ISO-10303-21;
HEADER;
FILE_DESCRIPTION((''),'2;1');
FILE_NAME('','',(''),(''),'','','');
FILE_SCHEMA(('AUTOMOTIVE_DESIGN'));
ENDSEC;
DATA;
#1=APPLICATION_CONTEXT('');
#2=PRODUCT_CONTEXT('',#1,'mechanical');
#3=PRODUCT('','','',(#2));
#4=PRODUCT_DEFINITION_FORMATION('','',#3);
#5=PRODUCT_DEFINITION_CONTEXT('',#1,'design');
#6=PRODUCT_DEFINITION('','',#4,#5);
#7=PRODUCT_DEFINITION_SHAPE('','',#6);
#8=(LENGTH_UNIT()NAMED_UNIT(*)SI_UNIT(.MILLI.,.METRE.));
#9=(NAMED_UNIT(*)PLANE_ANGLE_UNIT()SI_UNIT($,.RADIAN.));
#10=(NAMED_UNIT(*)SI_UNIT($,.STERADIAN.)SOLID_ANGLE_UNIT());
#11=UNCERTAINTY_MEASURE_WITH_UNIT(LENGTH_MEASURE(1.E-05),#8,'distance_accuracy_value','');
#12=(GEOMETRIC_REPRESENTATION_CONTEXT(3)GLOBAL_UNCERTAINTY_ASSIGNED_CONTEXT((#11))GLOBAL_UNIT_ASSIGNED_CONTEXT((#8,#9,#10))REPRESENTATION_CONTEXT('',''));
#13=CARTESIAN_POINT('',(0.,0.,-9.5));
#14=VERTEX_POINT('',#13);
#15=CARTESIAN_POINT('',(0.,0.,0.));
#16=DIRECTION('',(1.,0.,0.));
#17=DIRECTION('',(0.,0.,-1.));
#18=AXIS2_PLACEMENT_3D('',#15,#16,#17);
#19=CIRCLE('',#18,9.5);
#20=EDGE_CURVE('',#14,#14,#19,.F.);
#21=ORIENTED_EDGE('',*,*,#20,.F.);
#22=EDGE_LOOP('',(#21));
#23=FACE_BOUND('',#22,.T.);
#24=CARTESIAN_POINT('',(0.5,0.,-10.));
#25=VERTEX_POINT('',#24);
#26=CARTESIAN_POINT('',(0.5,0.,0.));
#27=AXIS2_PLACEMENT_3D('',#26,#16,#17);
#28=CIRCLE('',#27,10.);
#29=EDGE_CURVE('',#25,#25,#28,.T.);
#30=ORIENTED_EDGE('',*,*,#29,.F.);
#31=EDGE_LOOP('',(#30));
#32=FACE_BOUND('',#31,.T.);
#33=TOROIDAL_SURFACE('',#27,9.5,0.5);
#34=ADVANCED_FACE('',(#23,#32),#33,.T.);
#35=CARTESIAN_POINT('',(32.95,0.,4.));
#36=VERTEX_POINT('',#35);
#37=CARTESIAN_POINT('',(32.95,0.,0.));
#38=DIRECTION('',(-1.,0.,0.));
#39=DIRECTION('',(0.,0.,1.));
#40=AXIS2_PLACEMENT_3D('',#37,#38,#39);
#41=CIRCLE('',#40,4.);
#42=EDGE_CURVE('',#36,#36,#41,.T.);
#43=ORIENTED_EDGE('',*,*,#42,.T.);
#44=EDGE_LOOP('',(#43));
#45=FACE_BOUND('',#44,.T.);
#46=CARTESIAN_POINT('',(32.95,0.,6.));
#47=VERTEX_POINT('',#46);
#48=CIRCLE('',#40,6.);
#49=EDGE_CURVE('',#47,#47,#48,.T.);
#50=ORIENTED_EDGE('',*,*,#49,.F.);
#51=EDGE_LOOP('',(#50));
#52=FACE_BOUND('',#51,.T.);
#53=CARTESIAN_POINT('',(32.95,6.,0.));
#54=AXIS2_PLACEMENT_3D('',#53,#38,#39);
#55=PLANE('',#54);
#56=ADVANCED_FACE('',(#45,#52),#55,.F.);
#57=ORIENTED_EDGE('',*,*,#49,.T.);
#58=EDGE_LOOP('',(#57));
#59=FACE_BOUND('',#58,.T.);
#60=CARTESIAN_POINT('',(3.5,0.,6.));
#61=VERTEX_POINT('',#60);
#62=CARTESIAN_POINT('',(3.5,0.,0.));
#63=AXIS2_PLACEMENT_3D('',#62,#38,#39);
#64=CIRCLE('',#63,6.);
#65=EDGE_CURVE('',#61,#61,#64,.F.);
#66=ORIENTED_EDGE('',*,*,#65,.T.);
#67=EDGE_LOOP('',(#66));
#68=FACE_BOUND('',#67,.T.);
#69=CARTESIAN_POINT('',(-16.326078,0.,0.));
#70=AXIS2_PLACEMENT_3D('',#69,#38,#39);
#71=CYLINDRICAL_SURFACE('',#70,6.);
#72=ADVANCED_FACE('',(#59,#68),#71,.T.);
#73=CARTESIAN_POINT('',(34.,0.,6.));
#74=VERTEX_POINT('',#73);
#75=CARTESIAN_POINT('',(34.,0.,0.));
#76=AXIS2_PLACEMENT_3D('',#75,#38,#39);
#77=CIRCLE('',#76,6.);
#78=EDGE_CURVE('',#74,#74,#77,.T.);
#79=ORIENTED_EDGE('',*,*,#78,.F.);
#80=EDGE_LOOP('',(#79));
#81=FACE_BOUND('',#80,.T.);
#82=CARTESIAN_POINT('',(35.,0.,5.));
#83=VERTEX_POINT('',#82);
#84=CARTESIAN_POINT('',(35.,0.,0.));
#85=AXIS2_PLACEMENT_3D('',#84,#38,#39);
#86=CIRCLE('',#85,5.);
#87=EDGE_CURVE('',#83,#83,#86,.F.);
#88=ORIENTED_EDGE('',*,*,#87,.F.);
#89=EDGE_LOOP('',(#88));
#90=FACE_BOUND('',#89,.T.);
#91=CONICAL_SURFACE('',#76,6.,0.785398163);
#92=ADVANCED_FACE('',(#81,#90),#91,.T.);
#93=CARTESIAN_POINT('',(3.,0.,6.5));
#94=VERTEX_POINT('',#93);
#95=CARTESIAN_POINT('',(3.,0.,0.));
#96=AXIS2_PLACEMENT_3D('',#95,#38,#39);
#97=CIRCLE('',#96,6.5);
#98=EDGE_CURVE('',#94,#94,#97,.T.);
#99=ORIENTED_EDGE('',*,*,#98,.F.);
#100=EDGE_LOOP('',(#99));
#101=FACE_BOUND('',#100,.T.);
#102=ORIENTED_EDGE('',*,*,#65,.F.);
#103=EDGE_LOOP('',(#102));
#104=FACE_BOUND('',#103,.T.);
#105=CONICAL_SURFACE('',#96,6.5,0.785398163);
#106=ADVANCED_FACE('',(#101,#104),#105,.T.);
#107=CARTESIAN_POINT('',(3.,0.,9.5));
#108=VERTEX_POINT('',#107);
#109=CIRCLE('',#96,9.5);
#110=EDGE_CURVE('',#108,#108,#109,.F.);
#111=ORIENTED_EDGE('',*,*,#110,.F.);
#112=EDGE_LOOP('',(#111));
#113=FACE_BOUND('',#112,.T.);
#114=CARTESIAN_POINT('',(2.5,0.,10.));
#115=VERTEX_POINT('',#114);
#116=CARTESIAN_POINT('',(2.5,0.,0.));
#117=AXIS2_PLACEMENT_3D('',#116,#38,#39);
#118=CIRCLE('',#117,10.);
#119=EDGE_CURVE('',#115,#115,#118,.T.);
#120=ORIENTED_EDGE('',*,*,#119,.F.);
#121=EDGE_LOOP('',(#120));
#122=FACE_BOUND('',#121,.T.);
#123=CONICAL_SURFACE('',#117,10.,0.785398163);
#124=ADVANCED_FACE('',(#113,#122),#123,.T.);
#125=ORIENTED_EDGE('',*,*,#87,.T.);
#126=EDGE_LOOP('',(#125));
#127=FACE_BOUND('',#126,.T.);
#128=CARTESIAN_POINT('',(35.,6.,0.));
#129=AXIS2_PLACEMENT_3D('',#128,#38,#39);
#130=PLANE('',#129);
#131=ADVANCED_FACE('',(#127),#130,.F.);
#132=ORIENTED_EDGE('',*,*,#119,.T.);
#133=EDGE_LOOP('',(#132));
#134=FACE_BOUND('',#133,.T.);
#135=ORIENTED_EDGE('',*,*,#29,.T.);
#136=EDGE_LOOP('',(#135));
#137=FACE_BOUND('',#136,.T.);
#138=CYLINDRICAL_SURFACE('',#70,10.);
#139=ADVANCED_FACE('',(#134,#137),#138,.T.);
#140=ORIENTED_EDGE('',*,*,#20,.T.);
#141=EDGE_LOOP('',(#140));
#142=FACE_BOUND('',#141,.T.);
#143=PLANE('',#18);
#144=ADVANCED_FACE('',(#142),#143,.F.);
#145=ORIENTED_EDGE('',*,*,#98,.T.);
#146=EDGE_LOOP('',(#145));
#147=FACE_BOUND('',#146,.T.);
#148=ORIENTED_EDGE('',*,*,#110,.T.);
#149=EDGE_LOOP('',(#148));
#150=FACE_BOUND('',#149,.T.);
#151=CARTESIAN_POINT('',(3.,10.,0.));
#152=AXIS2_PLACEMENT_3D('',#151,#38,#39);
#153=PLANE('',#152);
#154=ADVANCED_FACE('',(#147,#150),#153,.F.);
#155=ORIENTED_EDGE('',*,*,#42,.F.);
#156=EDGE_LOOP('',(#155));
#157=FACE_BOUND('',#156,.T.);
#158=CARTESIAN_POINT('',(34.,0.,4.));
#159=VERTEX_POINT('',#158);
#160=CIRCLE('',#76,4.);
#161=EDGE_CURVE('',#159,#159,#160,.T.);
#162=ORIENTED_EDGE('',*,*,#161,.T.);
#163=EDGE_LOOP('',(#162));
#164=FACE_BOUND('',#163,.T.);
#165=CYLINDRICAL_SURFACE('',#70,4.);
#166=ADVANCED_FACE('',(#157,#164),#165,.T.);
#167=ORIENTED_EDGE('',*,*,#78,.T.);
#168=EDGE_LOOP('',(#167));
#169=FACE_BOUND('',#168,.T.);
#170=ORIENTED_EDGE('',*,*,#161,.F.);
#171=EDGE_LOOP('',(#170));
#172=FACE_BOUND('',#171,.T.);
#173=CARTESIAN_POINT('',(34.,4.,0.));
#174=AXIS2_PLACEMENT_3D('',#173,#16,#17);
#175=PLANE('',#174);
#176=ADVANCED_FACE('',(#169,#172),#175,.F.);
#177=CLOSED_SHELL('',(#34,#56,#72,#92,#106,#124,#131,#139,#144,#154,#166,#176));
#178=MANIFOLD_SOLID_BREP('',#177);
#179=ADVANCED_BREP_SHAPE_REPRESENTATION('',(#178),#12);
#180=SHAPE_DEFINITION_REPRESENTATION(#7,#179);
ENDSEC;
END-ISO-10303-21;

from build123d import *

# Parameters (mm, degrees)
SMUSSO1_SIZE = 0.5
SMUSSO2_SIZE = 0.5
SMUSSO3_SIZE = 1
RACCORDO1_R  = 0.5


with BuildPart() as part:
    # Schizzo1 → Rivoluzione1 (revolve)
    with BuildSketch(Plane.XY, mode=Mode.PRIVATE) as rivoluzione1_sk:
        Polygon((0, 0), (0, 10), (3, 10), (3, 6), (32.95, 6), (32.95, 4), (34, 4), (34, 6), (35, 6), (35, 0), align=None)
    revolve(rivoluzione1_sk.sketch.rotate(Axis((-16.326077986, 0, 0), (1, 0, 0)), 90), axis=Axis((-16.326077986, 0, 0), (1, 0, 0)))

    # Smusso1
    smusso1_edges = [part.edges().sort_by_distance(p)[0] for p in [
        (3, 0, -10),
    ]]
    chamfer(smusso1_edges, length=SMUSSO1_SIZE)

    # Smusso2
    smusso2_edges = [part.edges().sort_by_distance(p)[0] for p in [
        (3, 0, -6),
    ]]
    chamfer(smusso2_edges, length=SMUSSO2_SIZE)

    # Smusso3
    smusso3_edges = [part.edges().sort_by_distance(p)[0] for p in [
        (35, 0, -6),
    ]]
    chamfer(smusso3_edges, length=SMUSSO3_SIZE - 0.0001)  # a hair under: the kernel refuses the full size

    # Raccordo1
    raccordo1_edges = [part.edges().sort_by_distance(p)[0] for p in [
        (0, 0, -10),
    ]]
    fillet(raccordo1_edges, radius=RACCORDO1_R)


solid = part.part
